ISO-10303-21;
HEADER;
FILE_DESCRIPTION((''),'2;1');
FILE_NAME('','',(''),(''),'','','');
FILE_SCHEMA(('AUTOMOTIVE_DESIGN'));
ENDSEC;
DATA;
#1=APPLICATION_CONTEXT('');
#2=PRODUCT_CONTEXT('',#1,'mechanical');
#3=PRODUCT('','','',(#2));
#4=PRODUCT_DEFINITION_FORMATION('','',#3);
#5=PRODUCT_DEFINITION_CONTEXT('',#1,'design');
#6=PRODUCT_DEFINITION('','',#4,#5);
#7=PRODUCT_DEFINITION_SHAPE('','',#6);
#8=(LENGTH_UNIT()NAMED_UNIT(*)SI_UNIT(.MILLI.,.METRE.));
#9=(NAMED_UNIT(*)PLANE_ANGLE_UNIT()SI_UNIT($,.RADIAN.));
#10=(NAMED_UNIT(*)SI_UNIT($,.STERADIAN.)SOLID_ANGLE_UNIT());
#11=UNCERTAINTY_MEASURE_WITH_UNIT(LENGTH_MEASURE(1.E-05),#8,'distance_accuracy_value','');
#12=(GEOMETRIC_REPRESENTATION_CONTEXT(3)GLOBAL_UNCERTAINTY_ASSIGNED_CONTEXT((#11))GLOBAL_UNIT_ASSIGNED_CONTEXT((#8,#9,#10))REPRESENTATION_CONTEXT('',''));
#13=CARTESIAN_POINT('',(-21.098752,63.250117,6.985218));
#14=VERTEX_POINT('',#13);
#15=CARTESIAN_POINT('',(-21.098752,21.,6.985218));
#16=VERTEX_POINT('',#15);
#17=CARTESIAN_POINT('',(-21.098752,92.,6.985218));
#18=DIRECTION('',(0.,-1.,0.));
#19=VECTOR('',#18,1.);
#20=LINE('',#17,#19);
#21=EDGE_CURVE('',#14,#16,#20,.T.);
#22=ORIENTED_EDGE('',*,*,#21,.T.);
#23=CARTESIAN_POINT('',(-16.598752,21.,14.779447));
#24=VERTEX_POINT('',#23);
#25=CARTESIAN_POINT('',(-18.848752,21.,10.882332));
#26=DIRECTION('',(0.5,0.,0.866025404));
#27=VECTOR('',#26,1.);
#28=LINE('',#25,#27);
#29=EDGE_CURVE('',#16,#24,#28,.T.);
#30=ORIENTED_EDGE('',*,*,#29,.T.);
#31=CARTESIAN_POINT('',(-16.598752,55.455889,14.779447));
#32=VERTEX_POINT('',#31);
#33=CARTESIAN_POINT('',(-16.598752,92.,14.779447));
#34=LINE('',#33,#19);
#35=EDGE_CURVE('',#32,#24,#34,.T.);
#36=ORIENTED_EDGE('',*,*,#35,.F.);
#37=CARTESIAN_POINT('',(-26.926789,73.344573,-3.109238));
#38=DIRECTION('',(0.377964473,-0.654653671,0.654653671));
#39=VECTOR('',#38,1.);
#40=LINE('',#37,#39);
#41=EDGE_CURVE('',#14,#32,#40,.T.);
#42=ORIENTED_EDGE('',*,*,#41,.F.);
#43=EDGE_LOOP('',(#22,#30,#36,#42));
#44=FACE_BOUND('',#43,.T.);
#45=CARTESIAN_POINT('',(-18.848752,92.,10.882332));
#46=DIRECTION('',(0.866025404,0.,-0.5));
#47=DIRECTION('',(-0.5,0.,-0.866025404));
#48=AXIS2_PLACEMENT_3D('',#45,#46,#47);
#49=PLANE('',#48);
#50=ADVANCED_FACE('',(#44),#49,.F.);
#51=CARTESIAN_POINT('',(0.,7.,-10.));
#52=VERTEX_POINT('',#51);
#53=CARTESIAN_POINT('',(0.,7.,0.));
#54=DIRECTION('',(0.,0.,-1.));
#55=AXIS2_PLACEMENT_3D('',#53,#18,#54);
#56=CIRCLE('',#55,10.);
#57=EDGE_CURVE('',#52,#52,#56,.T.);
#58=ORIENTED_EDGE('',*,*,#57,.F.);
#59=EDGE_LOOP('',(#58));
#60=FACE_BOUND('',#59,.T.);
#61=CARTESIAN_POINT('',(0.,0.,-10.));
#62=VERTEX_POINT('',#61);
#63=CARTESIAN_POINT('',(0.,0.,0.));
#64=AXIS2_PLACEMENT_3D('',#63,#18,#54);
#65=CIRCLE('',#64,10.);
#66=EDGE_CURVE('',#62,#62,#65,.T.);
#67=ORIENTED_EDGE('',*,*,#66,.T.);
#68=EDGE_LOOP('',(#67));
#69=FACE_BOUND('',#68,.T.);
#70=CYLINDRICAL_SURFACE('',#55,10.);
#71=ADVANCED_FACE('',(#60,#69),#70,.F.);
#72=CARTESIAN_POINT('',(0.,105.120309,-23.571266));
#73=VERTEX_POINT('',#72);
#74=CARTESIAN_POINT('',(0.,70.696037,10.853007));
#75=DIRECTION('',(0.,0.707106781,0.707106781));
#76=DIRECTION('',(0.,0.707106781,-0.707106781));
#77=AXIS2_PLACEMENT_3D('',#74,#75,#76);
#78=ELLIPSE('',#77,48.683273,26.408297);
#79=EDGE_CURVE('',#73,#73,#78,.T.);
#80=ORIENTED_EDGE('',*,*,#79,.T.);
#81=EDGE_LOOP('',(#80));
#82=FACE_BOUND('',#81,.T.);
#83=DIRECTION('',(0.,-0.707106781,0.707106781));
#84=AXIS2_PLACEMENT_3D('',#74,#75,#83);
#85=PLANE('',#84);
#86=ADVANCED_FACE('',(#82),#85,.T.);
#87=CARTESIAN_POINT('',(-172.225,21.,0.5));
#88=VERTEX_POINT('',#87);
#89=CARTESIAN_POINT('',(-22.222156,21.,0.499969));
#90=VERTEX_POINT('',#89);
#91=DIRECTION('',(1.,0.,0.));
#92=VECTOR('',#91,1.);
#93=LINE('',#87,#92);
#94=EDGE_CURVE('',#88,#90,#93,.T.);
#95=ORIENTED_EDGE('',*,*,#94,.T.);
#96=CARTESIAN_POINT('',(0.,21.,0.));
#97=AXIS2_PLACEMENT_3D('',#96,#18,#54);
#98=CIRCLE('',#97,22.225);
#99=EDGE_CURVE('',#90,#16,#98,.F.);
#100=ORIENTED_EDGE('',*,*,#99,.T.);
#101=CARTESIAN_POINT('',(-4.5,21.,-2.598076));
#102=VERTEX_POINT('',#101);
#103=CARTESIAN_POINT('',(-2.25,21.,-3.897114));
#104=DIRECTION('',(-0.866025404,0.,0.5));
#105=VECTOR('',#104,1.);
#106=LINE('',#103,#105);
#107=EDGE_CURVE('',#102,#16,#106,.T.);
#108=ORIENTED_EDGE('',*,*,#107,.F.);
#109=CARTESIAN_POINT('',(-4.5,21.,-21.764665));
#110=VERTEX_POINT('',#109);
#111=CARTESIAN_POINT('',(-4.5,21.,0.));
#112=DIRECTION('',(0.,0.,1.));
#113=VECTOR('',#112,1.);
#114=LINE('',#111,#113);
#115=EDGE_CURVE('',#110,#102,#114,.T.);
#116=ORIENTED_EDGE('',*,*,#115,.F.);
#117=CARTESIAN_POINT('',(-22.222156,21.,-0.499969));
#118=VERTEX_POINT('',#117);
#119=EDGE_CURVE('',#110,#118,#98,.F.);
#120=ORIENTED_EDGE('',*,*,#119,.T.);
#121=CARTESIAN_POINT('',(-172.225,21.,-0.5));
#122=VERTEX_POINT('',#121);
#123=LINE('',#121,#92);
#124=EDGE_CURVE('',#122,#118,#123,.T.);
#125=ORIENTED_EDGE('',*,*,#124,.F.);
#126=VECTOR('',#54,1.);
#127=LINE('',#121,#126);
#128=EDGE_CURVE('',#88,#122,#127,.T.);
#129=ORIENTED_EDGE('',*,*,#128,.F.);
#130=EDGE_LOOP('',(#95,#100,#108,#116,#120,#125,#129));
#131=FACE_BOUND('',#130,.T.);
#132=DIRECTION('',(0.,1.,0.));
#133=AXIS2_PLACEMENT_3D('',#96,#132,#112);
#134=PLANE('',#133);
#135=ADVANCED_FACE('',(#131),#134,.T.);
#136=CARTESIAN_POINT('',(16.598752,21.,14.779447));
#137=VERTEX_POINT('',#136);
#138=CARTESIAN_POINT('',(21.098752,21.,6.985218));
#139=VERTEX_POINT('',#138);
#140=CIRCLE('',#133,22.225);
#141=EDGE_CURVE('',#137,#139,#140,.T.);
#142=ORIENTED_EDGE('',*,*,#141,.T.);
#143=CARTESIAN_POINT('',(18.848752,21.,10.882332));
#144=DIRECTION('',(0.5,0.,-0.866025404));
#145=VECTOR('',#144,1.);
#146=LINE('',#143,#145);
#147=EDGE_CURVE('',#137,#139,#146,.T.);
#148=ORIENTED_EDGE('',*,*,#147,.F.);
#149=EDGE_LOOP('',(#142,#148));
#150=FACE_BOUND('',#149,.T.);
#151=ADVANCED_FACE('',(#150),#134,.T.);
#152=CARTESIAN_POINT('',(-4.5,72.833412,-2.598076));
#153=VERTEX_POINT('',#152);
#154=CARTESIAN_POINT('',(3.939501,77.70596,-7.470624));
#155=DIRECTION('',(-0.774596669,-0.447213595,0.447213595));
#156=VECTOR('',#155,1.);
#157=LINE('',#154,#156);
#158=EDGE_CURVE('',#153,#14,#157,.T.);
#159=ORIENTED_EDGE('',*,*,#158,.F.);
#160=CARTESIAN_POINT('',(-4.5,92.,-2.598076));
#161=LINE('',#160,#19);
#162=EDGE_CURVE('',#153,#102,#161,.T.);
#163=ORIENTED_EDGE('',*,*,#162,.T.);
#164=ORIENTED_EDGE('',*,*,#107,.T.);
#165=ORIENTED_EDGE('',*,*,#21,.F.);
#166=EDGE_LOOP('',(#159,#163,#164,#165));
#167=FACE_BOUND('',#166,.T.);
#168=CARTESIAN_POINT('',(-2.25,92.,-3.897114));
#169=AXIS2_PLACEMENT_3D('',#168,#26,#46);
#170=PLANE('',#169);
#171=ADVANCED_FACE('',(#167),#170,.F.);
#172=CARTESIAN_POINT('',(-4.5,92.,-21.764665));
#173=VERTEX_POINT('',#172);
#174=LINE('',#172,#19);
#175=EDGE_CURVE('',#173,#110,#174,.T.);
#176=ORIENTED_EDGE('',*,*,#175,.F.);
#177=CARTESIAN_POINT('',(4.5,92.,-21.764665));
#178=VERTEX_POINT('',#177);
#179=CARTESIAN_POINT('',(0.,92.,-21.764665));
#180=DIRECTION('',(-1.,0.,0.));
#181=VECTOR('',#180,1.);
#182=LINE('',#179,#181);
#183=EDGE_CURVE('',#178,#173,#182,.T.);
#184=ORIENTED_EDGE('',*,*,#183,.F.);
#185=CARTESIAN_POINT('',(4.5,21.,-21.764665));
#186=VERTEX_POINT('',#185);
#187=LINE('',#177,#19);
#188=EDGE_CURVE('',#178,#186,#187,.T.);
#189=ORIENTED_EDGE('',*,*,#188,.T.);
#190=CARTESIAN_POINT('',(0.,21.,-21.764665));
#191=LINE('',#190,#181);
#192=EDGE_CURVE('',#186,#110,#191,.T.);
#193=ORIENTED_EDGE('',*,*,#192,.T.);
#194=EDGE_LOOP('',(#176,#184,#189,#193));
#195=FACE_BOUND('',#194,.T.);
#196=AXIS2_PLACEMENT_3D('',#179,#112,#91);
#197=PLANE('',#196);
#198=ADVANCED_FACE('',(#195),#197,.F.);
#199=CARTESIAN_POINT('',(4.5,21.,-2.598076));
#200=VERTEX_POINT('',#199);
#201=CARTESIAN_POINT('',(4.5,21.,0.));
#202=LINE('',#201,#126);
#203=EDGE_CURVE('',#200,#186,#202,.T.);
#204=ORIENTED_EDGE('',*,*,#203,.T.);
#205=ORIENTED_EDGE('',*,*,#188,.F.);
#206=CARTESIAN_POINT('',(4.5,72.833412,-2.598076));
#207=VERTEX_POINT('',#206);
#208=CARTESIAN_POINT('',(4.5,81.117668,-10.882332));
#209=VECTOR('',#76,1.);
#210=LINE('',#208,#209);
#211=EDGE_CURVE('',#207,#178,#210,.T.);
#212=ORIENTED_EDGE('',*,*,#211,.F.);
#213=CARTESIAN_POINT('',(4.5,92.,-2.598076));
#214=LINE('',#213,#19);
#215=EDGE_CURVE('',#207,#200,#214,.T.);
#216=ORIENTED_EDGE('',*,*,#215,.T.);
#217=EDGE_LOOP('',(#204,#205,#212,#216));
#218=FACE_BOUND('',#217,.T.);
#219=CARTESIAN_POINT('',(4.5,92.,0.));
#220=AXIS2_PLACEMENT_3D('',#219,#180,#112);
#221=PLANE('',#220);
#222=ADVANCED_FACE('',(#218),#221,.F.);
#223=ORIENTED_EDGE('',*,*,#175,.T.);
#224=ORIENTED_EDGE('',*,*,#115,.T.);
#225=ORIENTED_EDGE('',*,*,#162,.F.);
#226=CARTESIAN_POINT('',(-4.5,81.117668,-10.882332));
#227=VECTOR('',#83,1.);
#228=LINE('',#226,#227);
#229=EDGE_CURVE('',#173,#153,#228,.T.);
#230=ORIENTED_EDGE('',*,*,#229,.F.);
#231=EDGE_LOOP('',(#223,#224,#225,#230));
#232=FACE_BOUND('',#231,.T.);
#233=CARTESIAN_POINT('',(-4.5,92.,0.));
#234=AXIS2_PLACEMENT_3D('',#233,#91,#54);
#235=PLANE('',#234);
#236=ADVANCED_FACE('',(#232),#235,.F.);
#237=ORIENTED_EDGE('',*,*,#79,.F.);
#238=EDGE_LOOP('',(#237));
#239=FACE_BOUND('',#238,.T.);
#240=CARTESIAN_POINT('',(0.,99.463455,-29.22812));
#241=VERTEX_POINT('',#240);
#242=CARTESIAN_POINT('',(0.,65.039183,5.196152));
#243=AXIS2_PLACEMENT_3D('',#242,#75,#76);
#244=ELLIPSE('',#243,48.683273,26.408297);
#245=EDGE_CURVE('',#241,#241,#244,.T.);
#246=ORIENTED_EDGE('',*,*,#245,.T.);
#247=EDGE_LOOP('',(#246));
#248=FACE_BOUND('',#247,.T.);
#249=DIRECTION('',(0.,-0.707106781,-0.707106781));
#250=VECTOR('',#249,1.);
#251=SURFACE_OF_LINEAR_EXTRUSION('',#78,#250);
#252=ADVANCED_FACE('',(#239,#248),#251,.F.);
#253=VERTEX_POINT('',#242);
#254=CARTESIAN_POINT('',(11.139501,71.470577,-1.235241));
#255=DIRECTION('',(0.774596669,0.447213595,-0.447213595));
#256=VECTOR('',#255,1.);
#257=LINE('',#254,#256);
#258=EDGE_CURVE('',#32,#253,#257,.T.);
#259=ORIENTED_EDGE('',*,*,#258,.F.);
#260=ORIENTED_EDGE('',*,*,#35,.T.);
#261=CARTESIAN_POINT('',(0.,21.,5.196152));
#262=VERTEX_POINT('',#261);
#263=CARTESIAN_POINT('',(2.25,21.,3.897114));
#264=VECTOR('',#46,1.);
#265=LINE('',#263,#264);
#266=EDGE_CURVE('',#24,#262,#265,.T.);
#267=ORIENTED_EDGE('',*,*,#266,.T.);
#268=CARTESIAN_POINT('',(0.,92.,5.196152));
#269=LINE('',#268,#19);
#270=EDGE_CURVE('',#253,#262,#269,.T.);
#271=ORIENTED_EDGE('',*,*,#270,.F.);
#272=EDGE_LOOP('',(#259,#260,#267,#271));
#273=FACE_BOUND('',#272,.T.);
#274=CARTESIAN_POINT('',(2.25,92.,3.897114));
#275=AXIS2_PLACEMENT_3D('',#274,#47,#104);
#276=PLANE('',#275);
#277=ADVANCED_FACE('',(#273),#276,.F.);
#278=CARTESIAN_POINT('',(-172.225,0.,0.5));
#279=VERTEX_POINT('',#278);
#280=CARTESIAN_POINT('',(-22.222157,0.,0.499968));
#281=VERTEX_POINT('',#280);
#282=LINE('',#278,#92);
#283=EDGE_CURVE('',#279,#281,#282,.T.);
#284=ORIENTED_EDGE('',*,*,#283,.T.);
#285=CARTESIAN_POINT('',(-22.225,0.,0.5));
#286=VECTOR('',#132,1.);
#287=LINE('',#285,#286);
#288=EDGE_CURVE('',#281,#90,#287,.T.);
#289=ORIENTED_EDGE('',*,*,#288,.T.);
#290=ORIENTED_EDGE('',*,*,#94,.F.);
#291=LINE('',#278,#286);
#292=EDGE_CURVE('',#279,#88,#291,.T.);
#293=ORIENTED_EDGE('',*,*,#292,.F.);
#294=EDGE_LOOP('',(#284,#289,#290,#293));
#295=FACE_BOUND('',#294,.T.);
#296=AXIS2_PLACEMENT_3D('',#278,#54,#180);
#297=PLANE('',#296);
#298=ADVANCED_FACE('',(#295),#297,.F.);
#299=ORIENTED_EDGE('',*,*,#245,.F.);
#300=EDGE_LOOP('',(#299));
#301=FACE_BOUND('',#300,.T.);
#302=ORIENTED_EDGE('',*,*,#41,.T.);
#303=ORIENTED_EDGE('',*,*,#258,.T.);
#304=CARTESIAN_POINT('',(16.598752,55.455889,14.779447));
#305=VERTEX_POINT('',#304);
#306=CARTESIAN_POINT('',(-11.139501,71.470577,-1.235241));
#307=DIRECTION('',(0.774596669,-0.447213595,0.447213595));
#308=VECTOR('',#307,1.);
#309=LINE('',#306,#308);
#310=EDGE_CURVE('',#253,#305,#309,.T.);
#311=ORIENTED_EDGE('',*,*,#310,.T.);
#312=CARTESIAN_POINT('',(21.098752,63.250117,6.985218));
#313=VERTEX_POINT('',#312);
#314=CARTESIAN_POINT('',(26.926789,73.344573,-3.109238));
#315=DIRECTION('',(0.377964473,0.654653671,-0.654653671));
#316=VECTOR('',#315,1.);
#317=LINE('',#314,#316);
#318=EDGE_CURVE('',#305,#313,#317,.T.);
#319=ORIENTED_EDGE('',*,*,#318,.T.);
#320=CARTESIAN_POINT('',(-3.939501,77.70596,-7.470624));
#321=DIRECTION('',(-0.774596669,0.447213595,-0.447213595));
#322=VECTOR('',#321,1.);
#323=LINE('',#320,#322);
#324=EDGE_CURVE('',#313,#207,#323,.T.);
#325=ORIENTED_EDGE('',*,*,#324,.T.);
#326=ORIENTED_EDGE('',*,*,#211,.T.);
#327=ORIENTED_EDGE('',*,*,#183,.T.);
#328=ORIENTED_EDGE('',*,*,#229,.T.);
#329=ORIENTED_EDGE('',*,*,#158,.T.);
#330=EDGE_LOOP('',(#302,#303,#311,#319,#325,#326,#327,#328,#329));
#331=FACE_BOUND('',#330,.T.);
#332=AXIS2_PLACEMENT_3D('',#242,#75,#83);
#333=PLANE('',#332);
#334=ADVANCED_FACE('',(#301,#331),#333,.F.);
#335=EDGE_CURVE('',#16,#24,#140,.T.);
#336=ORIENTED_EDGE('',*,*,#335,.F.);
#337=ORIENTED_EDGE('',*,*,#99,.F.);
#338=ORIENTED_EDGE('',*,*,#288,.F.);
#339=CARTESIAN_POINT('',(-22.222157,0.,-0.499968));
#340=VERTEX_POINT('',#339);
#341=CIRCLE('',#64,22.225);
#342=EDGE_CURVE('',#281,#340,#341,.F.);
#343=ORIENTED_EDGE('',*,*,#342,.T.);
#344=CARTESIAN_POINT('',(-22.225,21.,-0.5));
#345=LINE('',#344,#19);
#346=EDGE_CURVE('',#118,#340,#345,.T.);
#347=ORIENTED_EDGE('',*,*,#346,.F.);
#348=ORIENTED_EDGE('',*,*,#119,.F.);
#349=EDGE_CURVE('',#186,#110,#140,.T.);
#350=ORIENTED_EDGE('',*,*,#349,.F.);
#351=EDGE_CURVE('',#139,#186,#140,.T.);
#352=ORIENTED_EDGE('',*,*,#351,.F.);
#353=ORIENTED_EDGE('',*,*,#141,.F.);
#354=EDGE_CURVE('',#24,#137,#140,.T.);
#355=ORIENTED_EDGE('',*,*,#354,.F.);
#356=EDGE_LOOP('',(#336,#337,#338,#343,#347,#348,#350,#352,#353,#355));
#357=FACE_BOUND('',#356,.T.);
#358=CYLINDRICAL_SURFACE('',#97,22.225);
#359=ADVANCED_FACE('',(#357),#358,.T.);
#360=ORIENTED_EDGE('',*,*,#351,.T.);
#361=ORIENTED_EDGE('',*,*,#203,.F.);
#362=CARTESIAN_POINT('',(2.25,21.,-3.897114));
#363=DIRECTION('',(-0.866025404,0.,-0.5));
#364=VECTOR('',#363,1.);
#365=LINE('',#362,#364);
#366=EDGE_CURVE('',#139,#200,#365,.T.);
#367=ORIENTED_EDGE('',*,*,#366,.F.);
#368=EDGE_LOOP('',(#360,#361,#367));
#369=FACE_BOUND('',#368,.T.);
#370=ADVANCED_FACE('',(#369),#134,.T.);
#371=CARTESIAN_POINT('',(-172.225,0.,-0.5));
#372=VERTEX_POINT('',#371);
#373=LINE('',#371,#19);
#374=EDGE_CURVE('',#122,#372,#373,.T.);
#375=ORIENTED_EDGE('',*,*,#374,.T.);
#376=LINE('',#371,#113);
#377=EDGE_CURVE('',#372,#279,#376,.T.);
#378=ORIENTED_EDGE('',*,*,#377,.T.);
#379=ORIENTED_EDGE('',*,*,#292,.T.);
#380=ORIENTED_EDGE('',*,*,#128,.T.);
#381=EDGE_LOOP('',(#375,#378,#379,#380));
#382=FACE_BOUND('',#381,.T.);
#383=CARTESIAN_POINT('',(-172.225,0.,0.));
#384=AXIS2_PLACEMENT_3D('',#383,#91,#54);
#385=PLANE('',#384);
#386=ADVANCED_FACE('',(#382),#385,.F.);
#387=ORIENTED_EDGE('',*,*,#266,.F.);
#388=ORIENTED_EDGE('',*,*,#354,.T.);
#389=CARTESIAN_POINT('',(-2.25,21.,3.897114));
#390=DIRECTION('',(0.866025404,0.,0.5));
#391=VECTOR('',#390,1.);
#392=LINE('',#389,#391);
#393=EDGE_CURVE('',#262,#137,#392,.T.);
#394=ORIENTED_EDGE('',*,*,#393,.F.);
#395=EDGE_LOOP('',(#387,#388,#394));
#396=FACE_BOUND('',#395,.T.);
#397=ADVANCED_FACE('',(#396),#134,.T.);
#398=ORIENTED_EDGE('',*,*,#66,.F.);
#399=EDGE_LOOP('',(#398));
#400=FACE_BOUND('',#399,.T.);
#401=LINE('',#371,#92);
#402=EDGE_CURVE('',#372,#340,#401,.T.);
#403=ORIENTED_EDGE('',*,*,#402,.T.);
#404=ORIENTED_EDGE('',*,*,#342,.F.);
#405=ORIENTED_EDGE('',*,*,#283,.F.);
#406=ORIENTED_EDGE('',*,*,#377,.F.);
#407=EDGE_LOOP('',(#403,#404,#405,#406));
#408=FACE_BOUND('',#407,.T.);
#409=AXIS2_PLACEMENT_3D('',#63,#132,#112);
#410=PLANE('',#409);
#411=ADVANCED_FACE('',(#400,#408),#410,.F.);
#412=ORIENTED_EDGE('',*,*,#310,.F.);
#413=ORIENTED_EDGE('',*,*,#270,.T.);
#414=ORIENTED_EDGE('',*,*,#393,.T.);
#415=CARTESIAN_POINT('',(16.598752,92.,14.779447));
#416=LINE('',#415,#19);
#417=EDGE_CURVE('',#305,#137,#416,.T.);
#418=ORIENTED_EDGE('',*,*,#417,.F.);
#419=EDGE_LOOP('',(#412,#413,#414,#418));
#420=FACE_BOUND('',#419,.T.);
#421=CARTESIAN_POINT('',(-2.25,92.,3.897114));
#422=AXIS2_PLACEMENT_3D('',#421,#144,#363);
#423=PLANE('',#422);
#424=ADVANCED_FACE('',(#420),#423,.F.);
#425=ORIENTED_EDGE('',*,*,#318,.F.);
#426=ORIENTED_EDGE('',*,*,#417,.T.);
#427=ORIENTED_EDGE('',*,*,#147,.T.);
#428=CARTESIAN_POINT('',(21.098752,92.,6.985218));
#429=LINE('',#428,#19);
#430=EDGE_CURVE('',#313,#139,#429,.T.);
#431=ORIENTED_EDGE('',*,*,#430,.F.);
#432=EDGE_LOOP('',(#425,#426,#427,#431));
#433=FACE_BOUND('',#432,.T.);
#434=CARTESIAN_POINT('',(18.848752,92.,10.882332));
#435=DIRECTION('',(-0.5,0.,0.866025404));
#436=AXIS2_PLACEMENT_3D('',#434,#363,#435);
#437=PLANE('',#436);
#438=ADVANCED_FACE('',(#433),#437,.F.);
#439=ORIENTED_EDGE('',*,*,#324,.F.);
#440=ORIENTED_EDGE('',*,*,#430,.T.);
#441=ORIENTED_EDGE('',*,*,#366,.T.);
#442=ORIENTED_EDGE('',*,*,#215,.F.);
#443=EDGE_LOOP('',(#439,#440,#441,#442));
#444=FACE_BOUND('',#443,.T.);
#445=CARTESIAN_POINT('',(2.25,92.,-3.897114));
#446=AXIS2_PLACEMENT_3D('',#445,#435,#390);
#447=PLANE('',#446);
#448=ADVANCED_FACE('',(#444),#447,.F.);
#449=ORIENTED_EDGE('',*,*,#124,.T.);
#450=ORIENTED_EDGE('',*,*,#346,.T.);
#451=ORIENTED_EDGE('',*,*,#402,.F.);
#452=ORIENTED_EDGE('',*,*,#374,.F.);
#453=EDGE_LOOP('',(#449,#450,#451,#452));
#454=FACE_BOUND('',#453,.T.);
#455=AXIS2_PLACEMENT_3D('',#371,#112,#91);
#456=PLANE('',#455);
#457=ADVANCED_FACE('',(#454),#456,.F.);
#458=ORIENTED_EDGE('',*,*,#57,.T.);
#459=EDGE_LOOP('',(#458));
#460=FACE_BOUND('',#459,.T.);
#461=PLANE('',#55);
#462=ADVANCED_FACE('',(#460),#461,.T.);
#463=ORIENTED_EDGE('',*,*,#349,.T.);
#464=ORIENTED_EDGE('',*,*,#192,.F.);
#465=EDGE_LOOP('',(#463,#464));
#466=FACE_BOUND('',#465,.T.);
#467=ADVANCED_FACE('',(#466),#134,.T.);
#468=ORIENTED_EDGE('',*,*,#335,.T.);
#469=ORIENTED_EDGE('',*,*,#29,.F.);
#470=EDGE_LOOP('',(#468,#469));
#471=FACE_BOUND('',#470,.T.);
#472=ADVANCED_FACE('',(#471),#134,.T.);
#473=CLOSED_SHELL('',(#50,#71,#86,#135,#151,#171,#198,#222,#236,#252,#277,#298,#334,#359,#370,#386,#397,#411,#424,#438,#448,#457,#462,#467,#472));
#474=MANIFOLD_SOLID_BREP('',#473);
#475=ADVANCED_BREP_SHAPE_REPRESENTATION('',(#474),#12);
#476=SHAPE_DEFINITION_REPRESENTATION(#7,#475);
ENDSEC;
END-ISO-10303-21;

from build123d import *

# Parameters (mm, degrees)
SKETCH1_R               = 22.225
BOSS_EXTRUDE1_DEPTH     = 21
SKETCH3_R               = 10
CUT_EXTRUDE1_DEPTH      = 7
BOSS_EXTRUDE2_DEPTH     = 71
SKETCH5_W               = 150
SKETCH5_H               = 180
CUT_EXTRUDE2_DEPTH      = 72
SKETCH6_RX              = 48.683272643
SKETCH6_RY              = 26.408297454
BOSS_EXTRUDE3_DEPTH     = 8
BOSS_EXTRUDE4_OUTLINE_W = 150.225
BOSS_EXTRUDE4_OUTLINE_H = 1
BOSS_EXTRUDE4_DEPTH     = 21


# Read off the part's stored shape, not the designer's step: Boss-Extrude4
with BuildPart() as part:
    # Sketch1 → Boss-Extrude1 (new body)
    with BuildSketch(Plane(origin=(0, 0, 0), x_dir=(1, 0, 0), z_dir=(0, 1, 0))):
        with Locations(Location((0, 0, 0), (0, 0, 90))):
            Circle(SKETCH1_R)
    extrude(amount=BOSS_EXTRUDE1_DEPTH)

    # Sketch3 → Cut-Extrude1 (cut)
    with BuildSketch(Plane.XZ):
        with Locations(Location((0, 0, 0), (0, 0, 270))):
            Circle(SKETCH3_R)
    extrude(amount=-CUT_EXTRUDE1_DEPTH, mode=Mode.SUBTRACT)

    # Sketch4 → Boss-Extrude2 (add)
    with BuildSketch(Plane(origin=(0, 21, 0), x_dir=(1, 0, 0), z_dir=(0, 1, 0))):
        Polygon((0, 0), (-4.5, 0), (-4.5, 2.598076211), (-21.098752445, -6.985217981), (-16.598752445, -14.779446615), (0, -5.196152423), (-2.25, -3.897114317), align=None)
        Polygon((4.5, 0), (0, 0), (2.25, -3.897114317), (0, -5.196152423), (16.598752445, -14.779446615), (21.098752445, -6.985217981), (4.5, 2.598076211), align=None)
        Polygon((-2.25, 3.897114317), (0, 0), (2.25, 3.897114317), (4.5, 2.598076211), (4.5, 21.764664597), (-4.5, 21.764664597), (-4.5, 2.598076211), align=None)
        Polygon((2.25, -3.897114317), (0, 0), (-2.25, -3.897114317), (0, -5.196152423), align=None)
        Polygon((-4.5, 2.598076211), (-4.5, 0), (0, 0), (-2.25, 3.897114317), align=None)
        Polygon((2.25, 3.897114317), (0, 0), (4.5, 0), (4.5, 2.598076211), align=None)
    extrude(amount=BOSS_EXTRUDE2_DEPTH)

    # Sketch5 → Cut-Extrude2 (cut)
    with BuildSketch(Plane(origin=(0, 35.117667702, 35.117667702), x_dir=(-1, 0, 0), z_dir=(0, -0.7071067811865488, -0.7071067811865464))):
        Rectangle(SKETCH5_W, SKETCH5_H)
    extrude(amount=-CUT_EXTRUDE2_DEPTH, mode=Mode.SUBTRACT)

    # Sketch6 → Boss-Extrude3 (add)
    with BuildSketch(Plane(origin=(0, 35.117667702, 35.117667702), x_dir=(1, 0, 0), z_dir=(0, 0.7071067811865487, 0.7071067811865464))):
        with Locations(Location((0, 42.315412714), (0, 0, 90))):
            Ellipse(SKETCH6_RX, SKETCH6_RY)
    extrude(amount=BOSS_EXTRUDE3_DEPTH)

    # Boss-Extrude4 outline → Boss-Extrude4 (add)
    with BuildSketch(Plane(origin=(0, 0, 0), x_dir=(1, 0, 0), z_dir=(0, 1, 0))):
        with Locations((-97.1125, 0)):
            Rectangle(BOSS_EXTRUDE4_OUTLINE_W, BOSS_EXTRUDE4_OUTLINE_H)
    extrude(amount=BOSS_EXTRUDE4_DEPTH)


solid = part.part
